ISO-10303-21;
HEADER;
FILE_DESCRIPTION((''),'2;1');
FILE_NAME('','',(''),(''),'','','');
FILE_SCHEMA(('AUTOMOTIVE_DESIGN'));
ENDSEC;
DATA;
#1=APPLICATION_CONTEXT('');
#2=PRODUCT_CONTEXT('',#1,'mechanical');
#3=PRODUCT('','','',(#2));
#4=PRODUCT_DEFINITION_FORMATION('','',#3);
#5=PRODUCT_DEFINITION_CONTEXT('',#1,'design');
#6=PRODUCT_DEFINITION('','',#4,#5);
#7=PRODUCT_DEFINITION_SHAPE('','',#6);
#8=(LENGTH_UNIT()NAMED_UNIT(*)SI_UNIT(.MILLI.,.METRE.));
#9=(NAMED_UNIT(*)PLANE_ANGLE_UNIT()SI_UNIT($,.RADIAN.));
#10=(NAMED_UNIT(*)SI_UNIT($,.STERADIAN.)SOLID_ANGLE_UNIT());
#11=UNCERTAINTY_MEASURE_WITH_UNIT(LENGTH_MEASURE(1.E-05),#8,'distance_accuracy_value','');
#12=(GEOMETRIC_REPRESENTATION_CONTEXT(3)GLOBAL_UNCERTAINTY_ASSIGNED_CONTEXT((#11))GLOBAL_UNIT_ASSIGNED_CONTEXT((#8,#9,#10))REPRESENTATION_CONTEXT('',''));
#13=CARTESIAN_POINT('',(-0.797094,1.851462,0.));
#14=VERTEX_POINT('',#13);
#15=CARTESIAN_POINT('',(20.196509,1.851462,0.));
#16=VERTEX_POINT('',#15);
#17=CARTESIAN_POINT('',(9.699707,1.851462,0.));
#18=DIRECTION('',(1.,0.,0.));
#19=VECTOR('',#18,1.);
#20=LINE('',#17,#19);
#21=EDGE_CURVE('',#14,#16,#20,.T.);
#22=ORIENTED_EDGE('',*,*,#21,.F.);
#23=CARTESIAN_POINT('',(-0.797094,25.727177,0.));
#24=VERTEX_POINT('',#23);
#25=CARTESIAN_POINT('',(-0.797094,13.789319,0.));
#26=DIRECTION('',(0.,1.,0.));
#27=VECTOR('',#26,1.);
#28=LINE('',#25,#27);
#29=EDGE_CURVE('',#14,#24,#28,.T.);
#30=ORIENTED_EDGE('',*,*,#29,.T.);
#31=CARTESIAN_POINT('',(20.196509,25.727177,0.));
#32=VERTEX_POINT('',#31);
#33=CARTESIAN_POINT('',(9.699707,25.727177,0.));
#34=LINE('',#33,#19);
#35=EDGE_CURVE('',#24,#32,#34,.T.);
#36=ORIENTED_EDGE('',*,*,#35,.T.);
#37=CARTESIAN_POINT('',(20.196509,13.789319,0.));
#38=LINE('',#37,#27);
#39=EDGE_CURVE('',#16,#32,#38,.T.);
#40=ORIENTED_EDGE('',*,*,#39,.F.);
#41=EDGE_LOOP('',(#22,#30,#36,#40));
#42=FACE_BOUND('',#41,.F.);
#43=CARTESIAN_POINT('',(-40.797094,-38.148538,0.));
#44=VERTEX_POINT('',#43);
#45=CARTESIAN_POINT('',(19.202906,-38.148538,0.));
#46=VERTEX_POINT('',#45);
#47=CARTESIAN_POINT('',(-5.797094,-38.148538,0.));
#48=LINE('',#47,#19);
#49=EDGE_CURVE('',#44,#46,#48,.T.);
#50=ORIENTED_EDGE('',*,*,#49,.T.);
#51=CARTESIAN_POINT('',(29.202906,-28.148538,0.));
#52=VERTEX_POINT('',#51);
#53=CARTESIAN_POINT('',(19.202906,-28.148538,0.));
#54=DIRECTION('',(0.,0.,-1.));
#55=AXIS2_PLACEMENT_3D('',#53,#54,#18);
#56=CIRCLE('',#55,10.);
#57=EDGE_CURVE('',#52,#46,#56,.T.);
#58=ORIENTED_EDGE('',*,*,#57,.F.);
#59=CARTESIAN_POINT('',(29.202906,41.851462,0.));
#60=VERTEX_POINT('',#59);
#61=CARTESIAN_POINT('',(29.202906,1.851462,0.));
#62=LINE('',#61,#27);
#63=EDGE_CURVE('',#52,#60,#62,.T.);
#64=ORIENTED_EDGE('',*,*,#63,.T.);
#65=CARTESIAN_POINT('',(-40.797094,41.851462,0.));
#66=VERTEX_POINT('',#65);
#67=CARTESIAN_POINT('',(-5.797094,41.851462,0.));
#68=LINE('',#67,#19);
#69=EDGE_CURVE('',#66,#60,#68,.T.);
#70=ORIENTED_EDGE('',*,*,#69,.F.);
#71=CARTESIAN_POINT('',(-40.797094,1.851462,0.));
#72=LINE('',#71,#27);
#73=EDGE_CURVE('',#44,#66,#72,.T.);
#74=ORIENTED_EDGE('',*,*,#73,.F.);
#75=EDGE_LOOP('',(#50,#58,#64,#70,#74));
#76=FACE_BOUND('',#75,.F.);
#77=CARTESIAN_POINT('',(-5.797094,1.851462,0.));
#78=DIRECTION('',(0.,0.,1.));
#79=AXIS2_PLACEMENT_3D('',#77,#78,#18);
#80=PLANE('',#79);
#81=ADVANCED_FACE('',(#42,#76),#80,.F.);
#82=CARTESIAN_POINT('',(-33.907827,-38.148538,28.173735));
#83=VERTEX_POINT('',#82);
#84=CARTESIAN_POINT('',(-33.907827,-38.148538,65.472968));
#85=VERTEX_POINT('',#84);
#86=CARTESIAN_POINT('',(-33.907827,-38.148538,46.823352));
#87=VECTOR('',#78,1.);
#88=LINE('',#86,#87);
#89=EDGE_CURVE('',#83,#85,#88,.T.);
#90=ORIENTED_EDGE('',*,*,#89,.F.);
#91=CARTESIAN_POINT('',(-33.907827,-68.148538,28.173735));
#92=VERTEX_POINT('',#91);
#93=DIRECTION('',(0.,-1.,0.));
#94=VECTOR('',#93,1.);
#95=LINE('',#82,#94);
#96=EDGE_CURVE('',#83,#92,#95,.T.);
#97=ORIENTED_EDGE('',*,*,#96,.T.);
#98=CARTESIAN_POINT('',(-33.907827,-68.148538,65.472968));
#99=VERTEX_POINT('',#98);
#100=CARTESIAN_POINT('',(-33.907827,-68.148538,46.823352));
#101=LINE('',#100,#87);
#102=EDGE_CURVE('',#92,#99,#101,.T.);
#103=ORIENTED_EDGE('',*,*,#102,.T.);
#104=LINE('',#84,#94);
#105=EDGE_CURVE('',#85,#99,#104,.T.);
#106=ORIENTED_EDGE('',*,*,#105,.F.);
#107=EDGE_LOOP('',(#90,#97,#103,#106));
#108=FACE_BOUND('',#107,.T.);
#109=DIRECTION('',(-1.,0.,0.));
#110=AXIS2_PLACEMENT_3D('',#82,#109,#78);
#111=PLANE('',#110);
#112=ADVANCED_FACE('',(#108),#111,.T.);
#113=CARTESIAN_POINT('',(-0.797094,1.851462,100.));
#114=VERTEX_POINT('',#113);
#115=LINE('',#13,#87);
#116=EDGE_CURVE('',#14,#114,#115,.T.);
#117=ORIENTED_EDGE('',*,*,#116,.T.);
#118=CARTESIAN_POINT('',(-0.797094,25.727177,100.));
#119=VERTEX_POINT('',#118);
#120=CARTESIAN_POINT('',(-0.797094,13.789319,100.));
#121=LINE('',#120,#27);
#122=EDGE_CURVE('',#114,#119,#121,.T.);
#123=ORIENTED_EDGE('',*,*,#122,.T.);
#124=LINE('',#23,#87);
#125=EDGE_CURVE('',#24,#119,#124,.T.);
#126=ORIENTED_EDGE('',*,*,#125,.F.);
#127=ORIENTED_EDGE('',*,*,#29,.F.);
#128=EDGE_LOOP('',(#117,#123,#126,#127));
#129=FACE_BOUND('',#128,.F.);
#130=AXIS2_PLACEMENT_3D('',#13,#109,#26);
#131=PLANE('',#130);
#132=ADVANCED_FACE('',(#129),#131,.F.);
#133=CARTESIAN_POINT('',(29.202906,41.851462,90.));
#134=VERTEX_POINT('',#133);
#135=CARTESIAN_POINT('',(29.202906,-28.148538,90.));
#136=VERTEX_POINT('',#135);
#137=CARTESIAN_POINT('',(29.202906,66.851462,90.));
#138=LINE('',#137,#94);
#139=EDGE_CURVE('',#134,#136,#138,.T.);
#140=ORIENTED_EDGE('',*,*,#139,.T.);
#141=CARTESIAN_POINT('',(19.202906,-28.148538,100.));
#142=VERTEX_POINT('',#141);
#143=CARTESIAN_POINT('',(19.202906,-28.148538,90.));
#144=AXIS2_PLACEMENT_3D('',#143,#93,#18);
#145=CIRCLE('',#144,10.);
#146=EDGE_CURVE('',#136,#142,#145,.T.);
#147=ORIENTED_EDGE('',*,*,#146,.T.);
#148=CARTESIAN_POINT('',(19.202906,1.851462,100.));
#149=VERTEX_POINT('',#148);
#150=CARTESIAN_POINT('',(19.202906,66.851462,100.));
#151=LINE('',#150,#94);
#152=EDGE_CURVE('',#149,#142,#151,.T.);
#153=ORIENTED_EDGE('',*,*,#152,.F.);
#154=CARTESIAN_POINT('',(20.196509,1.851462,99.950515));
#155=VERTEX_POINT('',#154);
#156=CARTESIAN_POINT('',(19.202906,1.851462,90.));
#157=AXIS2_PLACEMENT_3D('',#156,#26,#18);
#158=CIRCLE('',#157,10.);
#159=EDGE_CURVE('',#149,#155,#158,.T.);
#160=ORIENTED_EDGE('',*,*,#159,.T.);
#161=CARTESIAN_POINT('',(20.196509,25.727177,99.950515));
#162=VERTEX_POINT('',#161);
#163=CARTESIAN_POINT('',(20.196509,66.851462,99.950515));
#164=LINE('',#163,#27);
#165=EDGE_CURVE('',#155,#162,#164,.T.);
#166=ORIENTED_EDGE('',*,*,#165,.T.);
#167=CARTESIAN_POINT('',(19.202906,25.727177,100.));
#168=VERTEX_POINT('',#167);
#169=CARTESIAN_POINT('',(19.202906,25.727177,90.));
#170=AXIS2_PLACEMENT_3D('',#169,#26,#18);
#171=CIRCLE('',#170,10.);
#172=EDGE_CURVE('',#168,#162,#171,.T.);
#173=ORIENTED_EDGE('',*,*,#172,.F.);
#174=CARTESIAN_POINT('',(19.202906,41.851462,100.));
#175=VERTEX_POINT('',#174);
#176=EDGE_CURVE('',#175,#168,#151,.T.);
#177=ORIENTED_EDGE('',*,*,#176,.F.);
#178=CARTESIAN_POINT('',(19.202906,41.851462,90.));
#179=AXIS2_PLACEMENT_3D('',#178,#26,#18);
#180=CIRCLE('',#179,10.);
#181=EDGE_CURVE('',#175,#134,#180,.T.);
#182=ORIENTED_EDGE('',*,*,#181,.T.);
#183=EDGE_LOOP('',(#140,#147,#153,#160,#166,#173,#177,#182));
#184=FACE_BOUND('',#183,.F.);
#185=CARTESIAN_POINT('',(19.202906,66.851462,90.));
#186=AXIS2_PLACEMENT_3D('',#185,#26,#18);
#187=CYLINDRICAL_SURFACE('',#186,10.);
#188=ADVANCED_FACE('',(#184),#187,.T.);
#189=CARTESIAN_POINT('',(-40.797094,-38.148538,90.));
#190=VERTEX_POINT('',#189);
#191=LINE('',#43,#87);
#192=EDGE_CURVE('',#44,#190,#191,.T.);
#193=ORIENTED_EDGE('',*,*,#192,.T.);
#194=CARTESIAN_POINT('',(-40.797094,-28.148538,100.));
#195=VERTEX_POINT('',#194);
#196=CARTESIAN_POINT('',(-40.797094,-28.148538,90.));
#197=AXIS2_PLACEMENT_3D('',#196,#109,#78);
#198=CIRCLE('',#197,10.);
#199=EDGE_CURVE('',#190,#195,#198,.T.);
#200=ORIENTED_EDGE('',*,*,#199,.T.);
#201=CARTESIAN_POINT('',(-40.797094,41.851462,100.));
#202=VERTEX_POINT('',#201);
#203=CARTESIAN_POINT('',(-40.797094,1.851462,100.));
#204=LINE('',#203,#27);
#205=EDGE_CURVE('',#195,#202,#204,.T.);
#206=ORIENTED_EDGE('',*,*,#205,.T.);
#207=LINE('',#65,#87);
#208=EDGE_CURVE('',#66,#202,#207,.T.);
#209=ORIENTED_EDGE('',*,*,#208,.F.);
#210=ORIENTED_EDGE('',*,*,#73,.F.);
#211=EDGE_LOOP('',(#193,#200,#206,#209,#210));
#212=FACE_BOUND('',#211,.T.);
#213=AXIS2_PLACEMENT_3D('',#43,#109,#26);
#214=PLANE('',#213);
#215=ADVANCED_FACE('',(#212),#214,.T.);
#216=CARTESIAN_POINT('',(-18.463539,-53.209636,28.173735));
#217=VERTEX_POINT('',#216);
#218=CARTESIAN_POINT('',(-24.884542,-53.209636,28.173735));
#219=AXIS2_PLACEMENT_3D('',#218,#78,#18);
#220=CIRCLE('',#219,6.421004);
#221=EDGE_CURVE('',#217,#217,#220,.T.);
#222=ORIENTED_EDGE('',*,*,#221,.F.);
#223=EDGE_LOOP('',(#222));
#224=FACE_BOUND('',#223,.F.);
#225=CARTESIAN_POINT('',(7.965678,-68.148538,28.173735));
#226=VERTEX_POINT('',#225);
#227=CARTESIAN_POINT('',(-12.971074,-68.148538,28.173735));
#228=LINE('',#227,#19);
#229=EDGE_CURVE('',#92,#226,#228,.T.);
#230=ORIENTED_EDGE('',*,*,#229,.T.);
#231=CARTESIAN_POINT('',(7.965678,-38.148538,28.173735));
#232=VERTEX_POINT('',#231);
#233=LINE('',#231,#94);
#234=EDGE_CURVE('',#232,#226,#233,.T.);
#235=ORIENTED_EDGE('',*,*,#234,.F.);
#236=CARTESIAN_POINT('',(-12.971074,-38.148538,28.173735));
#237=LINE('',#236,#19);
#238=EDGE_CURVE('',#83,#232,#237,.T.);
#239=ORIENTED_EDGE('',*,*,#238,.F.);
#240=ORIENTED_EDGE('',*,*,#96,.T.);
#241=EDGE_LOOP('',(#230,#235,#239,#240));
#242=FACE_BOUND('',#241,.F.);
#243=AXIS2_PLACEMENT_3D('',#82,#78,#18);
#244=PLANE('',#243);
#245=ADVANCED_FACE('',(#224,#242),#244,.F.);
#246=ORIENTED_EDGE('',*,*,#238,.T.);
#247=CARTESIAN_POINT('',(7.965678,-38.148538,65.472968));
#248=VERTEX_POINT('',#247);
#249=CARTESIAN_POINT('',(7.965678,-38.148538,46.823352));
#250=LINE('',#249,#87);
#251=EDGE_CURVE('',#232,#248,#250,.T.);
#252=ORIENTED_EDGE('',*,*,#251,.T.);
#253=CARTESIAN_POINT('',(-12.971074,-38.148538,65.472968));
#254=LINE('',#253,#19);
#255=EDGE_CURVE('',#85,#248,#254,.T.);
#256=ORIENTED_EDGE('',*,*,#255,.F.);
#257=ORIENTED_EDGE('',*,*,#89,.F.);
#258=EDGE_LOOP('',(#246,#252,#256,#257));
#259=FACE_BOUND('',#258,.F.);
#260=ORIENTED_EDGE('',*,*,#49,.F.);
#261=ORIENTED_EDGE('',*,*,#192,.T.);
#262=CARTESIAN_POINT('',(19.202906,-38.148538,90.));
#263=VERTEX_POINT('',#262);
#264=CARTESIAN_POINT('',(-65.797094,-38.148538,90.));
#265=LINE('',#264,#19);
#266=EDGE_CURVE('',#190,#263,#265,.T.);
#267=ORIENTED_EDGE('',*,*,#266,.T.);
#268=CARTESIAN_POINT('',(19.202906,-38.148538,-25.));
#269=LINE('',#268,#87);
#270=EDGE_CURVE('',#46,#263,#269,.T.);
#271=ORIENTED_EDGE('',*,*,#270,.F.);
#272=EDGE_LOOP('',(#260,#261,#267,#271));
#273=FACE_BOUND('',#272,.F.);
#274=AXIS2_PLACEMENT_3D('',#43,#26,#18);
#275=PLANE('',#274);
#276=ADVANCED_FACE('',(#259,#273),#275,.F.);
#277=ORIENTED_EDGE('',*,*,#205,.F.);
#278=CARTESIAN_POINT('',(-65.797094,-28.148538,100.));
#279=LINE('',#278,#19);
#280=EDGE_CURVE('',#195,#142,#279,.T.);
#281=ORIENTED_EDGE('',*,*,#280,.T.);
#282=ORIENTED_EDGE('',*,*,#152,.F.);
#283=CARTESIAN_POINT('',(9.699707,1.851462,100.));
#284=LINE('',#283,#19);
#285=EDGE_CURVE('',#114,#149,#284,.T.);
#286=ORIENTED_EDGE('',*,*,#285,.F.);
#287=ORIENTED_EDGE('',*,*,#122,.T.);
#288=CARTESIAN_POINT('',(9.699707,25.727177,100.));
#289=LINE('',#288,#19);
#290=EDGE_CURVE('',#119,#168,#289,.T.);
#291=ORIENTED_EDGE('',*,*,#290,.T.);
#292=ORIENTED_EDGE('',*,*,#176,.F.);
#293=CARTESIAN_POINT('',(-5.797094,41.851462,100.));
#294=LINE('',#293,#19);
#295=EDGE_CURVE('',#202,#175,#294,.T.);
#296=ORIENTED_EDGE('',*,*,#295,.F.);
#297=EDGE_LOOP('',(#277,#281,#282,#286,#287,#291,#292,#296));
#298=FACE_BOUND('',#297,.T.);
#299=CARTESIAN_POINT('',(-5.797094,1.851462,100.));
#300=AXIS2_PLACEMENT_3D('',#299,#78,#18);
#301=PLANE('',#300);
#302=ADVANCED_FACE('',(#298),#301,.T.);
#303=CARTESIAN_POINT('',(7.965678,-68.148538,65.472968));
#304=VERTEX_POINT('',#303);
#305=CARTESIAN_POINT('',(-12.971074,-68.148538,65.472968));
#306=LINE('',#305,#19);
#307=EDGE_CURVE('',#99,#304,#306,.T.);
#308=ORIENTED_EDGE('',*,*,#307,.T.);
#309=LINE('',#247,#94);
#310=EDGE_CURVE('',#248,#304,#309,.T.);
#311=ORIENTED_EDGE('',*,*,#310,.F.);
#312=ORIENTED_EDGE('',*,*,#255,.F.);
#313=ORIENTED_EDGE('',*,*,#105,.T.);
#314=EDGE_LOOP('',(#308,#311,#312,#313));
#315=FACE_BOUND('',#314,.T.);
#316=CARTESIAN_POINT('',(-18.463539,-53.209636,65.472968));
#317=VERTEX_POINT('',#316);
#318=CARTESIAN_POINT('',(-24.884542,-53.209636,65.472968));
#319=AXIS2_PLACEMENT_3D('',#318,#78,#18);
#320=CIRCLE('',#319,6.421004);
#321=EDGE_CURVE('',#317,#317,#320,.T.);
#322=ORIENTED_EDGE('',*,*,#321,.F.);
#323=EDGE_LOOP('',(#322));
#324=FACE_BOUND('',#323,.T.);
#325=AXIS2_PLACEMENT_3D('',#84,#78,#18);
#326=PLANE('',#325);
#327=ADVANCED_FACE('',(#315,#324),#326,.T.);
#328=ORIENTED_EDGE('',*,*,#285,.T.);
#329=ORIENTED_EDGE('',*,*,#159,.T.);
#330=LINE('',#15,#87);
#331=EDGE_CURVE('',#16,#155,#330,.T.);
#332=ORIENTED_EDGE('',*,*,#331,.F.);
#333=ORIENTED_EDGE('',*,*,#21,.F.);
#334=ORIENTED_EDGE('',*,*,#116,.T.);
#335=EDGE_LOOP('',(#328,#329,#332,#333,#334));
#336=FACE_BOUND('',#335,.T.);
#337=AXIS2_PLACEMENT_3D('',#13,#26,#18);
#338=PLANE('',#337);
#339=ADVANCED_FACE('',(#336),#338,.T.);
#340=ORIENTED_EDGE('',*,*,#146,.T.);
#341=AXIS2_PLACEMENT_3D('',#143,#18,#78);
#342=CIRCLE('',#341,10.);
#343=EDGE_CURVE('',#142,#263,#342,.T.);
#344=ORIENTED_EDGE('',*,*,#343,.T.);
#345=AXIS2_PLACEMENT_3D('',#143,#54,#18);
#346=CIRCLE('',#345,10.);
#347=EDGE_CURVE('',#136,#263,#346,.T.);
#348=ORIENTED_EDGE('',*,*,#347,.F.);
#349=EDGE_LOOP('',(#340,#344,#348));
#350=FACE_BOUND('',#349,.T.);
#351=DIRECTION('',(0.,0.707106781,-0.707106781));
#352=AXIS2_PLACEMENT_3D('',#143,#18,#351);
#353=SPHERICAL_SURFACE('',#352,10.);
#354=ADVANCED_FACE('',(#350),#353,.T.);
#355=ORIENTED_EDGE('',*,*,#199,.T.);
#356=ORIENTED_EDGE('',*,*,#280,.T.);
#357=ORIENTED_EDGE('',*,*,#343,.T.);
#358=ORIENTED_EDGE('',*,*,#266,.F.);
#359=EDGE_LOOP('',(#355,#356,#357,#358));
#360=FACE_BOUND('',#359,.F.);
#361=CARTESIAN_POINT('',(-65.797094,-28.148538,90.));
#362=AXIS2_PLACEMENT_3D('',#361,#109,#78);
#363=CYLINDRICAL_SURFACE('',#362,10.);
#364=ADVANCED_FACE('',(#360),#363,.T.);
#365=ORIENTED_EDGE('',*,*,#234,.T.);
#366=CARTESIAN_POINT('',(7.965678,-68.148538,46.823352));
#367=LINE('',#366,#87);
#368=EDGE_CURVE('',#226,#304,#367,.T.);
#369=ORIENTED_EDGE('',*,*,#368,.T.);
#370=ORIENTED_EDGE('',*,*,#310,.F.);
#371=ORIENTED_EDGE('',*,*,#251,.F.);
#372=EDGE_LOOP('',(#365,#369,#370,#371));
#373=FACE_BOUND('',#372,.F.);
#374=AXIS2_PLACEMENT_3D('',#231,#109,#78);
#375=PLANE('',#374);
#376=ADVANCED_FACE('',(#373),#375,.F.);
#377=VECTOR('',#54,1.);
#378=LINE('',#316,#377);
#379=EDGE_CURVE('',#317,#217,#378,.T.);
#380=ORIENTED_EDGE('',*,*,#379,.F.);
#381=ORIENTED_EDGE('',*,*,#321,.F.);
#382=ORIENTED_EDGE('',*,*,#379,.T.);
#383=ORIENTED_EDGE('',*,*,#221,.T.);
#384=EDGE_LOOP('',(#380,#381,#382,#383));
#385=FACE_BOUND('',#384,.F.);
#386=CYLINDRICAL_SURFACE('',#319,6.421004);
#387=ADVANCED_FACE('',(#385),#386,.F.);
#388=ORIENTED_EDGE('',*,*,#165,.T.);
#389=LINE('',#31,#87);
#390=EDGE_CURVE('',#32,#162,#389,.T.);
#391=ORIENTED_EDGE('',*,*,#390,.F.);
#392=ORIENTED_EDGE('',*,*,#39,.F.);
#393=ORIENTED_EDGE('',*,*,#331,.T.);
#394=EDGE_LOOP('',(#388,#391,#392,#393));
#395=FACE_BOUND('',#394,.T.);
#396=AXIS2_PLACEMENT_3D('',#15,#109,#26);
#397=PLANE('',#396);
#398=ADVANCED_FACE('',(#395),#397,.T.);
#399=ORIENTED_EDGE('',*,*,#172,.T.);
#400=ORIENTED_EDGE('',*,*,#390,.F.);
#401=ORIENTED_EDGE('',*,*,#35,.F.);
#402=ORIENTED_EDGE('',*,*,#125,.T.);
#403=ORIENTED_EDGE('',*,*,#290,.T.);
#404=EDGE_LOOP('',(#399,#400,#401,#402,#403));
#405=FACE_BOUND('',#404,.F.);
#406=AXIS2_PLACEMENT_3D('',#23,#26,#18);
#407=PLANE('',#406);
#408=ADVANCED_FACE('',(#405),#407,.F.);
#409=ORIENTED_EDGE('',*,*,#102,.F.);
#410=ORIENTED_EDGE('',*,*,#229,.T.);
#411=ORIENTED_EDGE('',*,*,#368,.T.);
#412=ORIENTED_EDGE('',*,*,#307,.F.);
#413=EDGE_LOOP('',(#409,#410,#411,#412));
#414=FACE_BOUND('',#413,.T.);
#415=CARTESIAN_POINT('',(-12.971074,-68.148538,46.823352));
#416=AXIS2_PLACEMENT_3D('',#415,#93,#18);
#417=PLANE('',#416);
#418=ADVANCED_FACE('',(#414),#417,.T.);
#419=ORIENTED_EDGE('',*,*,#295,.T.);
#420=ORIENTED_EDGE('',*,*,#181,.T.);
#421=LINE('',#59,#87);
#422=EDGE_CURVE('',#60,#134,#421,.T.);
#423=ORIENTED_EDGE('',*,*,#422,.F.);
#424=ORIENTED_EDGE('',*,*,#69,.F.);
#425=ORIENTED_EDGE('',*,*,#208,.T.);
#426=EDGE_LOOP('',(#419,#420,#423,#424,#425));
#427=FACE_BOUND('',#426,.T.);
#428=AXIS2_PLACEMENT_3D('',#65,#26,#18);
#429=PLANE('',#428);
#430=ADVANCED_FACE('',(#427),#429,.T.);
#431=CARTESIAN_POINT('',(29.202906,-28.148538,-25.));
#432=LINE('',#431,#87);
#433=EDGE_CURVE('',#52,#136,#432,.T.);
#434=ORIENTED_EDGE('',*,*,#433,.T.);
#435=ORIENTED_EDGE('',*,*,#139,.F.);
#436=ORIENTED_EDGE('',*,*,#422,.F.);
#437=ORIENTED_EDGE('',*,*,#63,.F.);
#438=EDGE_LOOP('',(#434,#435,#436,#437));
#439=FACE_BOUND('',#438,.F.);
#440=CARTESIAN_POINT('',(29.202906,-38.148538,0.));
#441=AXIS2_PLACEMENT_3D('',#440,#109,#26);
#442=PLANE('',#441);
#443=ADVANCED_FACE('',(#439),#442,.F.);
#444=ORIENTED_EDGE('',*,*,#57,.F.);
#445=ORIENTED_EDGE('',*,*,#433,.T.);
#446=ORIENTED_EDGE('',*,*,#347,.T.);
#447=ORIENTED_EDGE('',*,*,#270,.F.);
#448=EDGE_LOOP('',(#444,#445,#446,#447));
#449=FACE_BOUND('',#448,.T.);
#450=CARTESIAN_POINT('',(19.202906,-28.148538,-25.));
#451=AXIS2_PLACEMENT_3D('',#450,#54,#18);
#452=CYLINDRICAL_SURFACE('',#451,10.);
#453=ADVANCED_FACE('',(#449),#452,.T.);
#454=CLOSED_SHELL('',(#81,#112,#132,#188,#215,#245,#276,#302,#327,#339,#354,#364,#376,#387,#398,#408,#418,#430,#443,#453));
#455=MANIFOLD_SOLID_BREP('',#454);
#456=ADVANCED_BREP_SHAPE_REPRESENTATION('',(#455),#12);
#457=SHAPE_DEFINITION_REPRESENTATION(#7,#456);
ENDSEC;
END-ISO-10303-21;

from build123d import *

# Parameters (mm, degrees)
F0_W         = 70
F0_H         = 80
F0_W_2       = 20.9936025798
F0_H_2       = 23.8757147082
F1_DEPTH     = 100
F2_W         = 41.873505339
F2_H         = 37.2992325574
F3_DEPTH     = 30
F4_R         = 6.4210037994
F5_DEPTH     = 50
F6_T1_DEPTH  = 85
F6_T3_DEPTH  = 95
F6_T5_DEPTH  = 115
F6_S9_W      = 10
F6_S9_H      = 10
F6_T10_DEPTH = 10


# Not quite as in the source:
# - a fillet or chamfer that OpenCascade refuses, or shapes differently, is made with other operations: its cross-section is extruded or revolved along the edge and cut away or added


with BuildPart() as f1:
    # F0 (on Top) → F1 (new body)
    with BuildSketch(Plane.XY):
        with Locations((-5.7970939631, 1.8514618278)):
            Rectangle(F0_W, F0_H)
        with Locations((9.6997073268, 13.7893191818)):
            Rectangle(F0_W_2, F0_H_2, mode=Mode.SUBTRACT)
    extrude(amount=F1_DEPTH)

    # F2 (on face) → F3 (join)
    with BuildSketch(Plane.XZ.offset(38.1485381722)):
        with Locations((-12.9710743204, 46.823351644)):
            Rectangle(F2_W, F2_H)
    extrude(amount=F3_DEPTH)

    # F4 (on face) → F5 (cut)
    with BuildSketch(Plane.XY.offset(65.4729679227)):
        with Locations((-24.8845424503, -53.2096363604)):
            Circle(F4_R)
    extrude(amount=-F5_DEPTH, mode=Mode.SUBTRACT)

    # F6: fillet of radius 10 on 3 edges, made by hand

    # F6_s2 → F6_t1 (cut)
    with BuildSketch(Plane.YZ.offset(-65.7970939631)):
        with BuildLine():
            ThreePointArc((-28.1485381722, 100), (-35.2196059841, 97.0710678119), (-38.1485381722, 90))
            Line((-38.1485381722, 90), (-38.1485381722, 100))
            Line((-38.1485381722, 100), (-28.1485381722, 100))
        make_face()
    extrude(amount=F6_T1_DEPTH, mode=Mode.SUBTRACT)

    # F6_s4 → F6_t3 (cut)
    with BuildSketch(Plane.XZ.offset(-66.8514618278)):
        with BuildLine():
            ThreePointArc((29.2029060369, 90), (26.2739738488, 97.0710678119), (19.2029060369, 100))
            Line((19.2029060369, 100), (29.2029060369, 100))
            Line((29.2029060369, 100), (29.2029060369, 90))
        make_face()
    extrude(amount=F6_T3_DEPTH, mode=Mode.SUBTRACT)

    # F6_s6 → F6_t5 (cut)
    with BuildSketch(Plane.XY.offset(-25)):
        with BuildLine():
            ThreePointArc((29.2029060369, -28.1485381722), (26.2739738488, -35.2196059841), (19.2029060369, -38.1485381722))
            Line((19.2029060369, -38.1485381722), (29.2029060369, -38.1485381722))
            Line((29.2029060369, -38.1485381722), (29.2029060369, -28.1485381722))
        make_face()
    extrude(amount=F6_T5_DEPTH, mode=Mode.SUBTRACT)


with BuildPart() as f6_tool8:
    # F6_s9 → F6_t10 (new body)
    with BuildSketch(Plane.YZ.offset(19.2029060369)):
        with Locations((-33.1485381722, 95)):
            Rectangle(F6_S9_W, F6_S9_H)
    extrude(amount=F6_T10_DEPTH)

    # F6_s11 → F6_t12 (revolve, cut)
    with BuildSketch(Plane(origin=(19.2029060369, -28.1485381722, 90), x_dir=(0, 0.7071067812, -0.7071067812), z_dir=(0, -0.7071067812, -0.7071067812))):
        with BuildLine():
            ThreePointArc((0, -10), (10, 0), (0, 10))
            Line((0, 10), (0, -10))
        make_face()
    revolve(axis=Axis((19.2029060369, -28.1485381722, 90), (1, 0, 0)), mode=Mode.SUBTRACT)


with BuildPart() as f1_1:
    add(f1.part)

    # F6_t7: cut F6_tool8
    add(f6_tool8.part, mode=Mode.SUBTRACT)


solid = f1_1.part
